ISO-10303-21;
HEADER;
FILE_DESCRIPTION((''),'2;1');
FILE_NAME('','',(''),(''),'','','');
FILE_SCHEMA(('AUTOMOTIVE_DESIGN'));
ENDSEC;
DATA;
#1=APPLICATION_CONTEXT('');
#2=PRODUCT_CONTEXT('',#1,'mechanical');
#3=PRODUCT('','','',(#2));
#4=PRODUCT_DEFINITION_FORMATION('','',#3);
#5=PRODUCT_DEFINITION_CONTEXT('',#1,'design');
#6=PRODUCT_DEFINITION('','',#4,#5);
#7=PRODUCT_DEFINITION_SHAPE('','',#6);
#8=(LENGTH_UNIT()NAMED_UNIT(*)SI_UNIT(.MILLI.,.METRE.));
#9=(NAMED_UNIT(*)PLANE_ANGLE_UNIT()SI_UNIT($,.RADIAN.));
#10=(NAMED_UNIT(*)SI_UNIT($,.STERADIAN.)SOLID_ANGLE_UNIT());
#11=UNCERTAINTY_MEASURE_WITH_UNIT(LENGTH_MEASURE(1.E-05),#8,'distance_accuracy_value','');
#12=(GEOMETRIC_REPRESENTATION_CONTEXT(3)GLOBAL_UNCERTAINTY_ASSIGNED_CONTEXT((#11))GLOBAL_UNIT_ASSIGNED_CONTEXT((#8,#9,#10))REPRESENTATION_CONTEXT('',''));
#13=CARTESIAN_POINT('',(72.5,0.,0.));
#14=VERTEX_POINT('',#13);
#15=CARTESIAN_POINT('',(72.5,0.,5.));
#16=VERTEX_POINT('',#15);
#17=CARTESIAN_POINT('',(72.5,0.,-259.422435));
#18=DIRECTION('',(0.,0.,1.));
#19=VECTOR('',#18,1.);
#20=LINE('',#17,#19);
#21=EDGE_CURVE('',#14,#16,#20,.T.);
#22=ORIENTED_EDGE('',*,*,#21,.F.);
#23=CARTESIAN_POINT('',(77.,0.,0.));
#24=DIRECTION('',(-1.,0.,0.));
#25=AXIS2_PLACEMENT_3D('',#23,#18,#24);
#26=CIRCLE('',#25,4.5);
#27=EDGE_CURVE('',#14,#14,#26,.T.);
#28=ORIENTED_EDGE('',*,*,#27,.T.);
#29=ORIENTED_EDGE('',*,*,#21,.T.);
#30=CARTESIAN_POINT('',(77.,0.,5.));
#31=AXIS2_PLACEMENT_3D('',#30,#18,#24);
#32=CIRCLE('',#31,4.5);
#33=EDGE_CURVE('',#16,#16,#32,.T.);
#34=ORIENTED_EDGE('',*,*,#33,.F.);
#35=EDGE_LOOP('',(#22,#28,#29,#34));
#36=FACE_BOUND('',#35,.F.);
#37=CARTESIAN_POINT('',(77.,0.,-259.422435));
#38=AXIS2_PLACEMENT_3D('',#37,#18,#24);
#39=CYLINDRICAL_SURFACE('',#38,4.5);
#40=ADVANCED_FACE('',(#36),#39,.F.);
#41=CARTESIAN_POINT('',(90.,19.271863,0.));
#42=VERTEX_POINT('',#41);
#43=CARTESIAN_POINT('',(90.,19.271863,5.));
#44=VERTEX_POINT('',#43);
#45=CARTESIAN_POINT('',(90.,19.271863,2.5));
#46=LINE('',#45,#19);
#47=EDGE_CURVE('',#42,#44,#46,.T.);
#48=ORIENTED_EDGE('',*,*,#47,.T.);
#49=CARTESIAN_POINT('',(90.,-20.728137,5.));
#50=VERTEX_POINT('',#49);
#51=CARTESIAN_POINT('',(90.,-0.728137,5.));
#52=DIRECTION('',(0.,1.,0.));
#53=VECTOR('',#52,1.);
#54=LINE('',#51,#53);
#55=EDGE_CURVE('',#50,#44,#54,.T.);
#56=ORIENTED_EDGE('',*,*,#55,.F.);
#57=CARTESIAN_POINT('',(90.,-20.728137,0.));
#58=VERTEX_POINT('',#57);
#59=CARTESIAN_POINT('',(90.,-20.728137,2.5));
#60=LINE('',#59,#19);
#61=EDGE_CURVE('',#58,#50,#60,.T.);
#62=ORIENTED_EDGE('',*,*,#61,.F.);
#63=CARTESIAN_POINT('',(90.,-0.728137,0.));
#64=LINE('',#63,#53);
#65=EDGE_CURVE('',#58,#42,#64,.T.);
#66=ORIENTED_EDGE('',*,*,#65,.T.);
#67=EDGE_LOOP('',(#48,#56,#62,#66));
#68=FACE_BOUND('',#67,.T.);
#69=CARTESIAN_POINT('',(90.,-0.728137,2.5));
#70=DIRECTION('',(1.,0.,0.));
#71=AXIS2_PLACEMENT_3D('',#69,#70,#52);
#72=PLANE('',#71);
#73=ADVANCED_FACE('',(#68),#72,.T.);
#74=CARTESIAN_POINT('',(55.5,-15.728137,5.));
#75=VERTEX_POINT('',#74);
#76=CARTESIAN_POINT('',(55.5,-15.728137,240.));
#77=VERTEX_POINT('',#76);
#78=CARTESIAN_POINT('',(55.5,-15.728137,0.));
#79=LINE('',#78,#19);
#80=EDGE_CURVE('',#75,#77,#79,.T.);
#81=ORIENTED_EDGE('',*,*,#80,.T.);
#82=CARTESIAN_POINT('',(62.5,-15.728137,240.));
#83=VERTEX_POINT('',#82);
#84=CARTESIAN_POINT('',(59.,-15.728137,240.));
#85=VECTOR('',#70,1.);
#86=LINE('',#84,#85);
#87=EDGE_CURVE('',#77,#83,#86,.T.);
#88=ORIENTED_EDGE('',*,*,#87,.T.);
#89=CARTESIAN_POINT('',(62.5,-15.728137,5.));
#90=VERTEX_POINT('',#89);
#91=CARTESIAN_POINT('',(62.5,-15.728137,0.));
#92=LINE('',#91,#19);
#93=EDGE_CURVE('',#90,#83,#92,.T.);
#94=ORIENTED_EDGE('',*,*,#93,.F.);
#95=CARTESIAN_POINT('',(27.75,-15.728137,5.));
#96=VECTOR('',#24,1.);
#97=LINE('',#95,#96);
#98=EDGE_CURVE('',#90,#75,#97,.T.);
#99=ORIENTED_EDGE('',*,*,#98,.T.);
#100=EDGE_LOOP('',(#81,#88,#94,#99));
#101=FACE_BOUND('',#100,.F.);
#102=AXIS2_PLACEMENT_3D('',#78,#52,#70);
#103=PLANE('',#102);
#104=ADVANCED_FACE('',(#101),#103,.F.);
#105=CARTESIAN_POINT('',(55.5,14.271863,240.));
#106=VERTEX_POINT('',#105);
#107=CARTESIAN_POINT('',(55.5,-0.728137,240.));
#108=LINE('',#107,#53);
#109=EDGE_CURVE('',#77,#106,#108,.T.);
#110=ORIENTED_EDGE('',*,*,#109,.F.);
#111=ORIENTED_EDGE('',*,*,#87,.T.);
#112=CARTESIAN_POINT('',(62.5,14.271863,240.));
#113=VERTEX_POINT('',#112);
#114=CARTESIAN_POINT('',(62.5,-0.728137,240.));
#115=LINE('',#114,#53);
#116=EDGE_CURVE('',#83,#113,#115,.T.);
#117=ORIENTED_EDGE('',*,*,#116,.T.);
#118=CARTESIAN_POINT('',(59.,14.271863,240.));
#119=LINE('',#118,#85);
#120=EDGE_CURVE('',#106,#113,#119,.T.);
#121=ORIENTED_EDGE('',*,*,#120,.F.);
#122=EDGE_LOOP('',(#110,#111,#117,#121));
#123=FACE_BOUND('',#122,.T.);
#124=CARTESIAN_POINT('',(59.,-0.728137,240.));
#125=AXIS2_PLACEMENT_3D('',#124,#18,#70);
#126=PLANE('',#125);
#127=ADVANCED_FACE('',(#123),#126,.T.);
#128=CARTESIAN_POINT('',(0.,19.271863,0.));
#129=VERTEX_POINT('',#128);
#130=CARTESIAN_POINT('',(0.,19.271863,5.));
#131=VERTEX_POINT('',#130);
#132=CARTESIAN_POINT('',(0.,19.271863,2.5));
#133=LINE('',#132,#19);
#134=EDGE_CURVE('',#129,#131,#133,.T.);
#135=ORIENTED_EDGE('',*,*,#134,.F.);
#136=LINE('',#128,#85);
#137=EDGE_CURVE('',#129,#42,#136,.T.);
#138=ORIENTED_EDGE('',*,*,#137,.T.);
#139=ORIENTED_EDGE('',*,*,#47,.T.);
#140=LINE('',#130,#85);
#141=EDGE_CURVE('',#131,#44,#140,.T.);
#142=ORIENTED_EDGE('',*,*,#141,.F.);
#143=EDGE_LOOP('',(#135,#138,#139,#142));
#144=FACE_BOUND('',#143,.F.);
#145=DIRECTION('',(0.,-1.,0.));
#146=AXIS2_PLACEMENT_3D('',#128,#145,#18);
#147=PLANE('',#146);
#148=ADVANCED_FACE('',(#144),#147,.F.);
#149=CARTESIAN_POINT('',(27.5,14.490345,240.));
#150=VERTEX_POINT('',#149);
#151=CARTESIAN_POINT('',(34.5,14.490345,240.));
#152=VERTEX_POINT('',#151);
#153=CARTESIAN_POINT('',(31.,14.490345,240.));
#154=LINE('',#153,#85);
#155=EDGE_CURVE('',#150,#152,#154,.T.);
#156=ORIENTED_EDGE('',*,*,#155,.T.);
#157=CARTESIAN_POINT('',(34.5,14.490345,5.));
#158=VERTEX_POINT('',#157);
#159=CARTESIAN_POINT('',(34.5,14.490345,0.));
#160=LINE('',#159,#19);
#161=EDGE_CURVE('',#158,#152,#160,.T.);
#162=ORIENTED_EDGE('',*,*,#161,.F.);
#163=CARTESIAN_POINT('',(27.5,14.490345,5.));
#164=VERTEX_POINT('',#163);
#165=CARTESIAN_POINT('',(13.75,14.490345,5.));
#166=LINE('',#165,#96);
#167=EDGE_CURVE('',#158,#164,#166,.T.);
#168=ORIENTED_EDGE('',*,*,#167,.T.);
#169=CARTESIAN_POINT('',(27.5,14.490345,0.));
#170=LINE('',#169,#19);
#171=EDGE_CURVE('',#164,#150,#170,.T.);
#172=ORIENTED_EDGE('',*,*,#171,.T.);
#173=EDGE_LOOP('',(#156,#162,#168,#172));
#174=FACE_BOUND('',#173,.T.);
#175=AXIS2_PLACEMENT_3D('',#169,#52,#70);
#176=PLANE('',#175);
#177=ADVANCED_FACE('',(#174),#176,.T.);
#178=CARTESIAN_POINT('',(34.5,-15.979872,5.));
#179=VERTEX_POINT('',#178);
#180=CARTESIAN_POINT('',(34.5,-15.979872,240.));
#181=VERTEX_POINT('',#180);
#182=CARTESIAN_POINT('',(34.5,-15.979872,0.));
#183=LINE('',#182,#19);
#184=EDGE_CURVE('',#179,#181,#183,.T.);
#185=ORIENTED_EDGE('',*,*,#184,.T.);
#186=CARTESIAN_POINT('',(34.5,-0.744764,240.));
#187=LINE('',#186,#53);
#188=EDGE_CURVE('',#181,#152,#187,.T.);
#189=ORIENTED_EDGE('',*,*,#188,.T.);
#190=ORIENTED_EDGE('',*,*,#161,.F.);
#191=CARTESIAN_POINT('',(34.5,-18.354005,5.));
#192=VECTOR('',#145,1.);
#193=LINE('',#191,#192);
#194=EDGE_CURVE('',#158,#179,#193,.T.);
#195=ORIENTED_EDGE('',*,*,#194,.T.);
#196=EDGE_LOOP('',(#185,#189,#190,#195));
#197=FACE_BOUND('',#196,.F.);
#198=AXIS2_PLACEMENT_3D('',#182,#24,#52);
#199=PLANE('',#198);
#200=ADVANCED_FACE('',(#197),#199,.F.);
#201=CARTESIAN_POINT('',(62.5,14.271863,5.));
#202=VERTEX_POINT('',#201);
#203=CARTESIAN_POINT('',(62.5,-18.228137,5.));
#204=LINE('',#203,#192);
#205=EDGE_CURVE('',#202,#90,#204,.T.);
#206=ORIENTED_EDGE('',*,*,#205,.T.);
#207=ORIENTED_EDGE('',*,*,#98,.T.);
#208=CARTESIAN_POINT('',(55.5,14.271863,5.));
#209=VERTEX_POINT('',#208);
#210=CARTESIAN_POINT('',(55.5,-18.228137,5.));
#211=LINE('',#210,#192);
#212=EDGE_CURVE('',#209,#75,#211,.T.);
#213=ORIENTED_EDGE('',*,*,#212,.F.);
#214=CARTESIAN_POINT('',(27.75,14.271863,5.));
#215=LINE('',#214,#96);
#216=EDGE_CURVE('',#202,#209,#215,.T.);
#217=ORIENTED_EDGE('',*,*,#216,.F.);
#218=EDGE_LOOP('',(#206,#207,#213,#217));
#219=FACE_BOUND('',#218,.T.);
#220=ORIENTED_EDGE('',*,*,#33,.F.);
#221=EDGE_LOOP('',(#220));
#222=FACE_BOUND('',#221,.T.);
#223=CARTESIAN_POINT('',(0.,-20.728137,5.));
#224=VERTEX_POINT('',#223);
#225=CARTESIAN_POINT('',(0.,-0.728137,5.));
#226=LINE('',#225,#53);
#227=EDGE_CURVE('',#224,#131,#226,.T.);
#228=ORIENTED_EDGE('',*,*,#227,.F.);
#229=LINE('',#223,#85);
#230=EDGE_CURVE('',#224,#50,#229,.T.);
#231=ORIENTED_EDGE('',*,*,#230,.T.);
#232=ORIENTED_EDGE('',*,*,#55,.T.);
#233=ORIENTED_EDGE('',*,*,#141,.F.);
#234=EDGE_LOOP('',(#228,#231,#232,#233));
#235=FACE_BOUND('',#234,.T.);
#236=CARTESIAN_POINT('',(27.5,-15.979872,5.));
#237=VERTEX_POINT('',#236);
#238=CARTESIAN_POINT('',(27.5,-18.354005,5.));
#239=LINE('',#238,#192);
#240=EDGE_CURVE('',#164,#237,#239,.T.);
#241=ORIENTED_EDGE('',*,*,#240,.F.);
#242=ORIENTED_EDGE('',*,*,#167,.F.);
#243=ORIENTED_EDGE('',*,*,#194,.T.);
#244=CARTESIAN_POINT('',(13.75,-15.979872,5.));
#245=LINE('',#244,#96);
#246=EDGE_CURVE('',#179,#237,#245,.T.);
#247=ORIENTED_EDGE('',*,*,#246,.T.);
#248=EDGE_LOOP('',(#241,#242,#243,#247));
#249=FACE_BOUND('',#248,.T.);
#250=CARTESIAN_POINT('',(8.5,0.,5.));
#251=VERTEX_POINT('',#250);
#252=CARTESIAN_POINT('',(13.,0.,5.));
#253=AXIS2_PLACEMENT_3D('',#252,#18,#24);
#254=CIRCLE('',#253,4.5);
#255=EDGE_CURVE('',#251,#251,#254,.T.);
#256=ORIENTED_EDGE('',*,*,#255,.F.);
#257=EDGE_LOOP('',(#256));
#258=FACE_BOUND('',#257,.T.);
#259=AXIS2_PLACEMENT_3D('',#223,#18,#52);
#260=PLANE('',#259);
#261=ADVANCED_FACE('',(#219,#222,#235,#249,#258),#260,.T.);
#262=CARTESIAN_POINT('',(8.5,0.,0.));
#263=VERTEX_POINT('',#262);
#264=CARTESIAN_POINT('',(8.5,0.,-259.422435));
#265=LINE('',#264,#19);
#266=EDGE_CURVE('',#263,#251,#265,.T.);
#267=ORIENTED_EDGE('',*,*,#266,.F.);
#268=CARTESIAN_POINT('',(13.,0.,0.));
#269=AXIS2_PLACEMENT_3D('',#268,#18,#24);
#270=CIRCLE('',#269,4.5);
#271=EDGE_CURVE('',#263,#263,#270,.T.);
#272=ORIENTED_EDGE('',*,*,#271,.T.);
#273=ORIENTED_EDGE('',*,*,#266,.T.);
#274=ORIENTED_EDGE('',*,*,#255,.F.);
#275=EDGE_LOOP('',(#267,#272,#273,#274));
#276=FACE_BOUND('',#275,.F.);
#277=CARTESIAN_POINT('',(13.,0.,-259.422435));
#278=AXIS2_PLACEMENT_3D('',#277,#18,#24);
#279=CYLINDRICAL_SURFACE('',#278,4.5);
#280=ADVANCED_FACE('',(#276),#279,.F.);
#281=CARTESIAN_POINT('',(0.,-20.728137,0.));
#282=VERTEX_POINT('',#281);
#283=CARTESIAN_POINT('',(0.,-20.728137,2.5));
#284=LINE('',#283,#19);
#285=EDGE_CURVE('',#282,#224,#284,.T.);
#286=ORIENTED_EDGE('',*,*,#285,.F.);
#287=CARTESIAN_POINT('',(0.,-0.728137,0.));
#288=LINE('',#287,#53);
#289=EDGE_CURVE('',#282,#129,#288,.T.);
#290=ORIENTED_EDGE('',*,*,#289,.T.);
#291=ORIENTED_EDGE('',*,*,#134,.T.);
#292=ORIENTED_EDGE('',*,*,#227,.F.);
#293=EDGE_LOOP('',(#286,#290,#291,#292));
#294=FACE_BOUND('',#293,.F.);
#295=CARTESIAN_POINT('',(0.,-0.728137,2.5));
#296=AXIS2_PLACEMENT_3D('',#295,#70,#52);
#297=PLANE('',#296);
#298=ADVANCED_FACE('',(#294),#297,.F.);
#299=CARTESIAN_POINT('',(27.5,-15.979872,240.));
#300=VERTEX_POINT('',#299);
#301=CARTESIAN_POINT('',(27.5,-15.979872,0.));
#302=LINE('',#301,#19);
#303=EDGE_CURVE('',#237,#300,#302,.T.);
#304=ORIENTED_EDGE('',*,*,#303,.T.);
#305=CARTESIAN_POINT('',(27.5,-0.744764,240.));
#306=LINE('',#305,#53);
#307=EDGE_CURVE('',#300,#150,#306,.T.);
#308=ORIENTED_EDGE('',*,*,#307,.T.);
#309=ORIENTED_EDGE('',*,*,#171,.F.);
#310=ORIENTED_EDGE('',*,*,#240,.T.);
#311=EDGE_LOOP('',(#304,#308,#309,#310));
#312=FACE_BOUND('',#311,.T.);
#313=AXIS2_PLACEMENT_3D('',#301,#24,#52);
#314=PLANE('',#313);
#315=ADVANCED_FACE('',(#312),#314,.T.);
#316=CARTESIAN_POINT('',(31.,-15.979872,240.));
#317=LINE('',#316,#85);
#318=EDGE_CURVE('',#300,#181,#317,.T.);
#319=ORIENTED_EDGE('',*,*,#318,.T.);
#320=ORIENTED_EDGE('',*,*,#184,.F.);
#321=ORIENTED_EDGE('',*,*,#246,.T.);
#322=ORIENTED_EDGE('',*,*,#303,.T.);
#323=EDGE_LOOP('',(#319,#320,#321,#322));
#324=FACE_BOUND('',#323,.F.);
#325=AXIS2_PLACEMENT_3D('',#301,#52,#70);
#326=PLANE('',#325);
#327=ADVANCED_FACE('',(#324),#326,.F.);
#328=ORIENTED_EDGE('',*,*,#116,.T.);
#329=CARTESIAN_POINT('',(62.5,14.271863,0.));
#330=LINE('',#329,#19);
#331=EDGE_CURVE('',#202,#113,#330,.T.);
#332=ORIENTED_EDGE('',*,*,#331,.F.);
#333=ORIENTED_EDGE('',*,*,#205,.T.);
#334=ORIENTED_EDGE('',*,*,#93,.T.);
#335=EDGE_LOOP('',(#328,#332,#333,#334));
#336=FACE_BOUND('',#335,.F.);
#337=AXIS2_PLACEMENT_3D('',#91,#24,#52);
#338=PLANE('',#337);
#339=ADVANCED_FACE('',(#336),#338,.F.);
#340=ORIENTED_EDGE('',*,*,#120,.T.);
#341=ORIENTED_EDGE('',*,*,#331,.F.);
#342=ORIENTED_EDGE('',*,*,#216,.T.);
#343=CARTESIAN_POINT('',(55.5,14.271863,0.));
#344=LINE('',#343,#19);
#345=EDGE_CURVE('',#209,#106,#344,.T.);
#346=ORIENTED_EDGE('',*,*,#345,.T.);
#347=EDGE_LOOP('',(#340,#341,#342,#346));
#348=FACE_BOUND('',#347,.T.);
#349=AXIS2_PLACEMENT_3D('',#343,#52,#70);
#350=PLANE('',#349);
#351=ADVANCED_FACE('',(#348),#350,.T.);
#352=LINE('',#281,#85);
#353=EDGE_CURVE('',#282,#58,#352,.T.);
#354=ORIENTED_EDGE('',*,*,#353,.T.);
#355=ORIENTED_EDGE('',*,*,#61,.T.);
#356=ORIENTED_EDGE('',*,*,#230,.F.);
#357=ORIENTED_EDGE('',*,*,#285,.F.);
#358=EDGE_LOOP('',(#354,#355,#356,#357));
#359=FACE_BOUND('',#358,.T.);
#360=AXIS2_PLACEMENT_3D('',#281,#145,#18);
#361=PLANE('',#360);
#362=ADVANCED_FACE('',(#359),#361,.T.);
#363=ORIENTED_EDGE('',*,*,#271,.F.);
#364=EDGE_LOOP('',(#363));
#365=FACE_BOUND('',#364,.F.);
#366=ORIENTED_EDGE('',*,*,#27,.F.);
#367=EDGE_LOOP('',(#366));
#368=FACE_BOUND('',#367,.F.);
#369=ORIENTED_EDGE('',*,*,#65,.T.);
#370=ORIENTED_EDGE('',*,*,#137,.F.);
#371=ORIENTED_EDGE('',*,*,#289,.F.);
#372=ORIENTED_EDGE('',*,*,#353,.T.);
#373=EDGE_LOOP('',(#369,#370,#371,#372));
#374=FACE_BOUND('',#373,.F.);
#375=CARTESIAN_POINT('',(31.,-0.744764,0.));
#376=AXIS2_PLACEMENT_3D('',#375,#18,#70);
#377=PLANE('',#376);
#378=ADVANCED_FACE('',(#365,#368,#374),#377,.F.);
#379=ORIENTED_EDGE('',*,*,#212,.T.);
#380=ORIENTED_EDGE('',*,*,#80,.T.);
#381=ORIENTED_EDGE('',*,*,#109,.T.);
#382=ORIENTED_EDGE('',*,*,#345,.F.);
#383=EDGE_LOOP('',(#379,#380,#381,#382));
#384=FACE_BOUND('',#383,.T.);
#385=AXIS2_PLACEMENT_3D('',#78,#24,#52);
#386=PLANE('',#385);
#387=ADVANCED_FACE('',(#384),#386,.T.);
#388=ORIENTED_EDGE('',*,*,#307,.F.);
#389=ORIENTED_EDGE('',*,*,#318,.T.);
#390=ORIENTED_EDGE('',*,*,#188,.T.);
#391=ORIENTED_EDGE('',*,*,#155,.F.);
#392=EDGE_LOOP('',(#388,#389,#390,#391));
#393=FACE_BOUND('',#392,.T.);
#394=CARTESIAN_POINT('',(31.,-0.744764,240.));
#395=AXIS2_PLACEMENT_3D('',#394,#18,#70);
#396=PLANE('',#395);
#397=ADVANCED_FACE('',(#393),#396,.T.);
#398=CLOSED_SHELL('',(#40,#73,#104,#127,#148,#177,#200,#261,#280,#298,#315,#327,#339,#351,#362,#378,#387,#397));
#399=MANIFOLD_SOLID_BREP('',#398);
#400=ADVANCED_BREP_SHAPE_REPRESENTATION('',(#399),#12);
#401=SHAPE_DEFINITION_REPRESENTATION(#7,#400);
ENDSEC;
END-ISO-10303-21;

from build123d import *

# Parameters (mm, degrees)
F0_W     = 40
F0_H     = 5
F1_DEPTH = 90
F2_W     = 7
F2_H     = 30.4702166427
F2_H_2   = 30
F3_DEPTH = 240
F5_D     = 9


# Not quite as in the source:
# - a feature names something its author has since deleted; it is built from what else it names


with BuildPart() as f1:
    # F0 (on Right) → F1 (new body)
    with BuildSketch(Plane.YZ):
        with Locations((-0.72813743, 2.5)):
            Rectangle(F0_W, F0_H)
    extrude(amount=F1_DEPTH)

    # F2 (on Top) → F3 (join)
    with BuildSketch(Plane.XY):
        with Locations((31, -0.7447636027)):
            Rectangle(F2_W, F2_H)
        with Locations((59, -0.72813743)):
            Rectangle(F2_W, F2_H_2)
    extrude(amount=F3_DEPTH)

    # F5 (through all)
    with Locations(Plane(origin=(0, 0, 0), x_dir=(1, 0, 0), z_dir=(0, 0, -1))):
        with Locations((13, 0), (77, 0)):
            Hole(F5_D / 2)


solid = f1.part
